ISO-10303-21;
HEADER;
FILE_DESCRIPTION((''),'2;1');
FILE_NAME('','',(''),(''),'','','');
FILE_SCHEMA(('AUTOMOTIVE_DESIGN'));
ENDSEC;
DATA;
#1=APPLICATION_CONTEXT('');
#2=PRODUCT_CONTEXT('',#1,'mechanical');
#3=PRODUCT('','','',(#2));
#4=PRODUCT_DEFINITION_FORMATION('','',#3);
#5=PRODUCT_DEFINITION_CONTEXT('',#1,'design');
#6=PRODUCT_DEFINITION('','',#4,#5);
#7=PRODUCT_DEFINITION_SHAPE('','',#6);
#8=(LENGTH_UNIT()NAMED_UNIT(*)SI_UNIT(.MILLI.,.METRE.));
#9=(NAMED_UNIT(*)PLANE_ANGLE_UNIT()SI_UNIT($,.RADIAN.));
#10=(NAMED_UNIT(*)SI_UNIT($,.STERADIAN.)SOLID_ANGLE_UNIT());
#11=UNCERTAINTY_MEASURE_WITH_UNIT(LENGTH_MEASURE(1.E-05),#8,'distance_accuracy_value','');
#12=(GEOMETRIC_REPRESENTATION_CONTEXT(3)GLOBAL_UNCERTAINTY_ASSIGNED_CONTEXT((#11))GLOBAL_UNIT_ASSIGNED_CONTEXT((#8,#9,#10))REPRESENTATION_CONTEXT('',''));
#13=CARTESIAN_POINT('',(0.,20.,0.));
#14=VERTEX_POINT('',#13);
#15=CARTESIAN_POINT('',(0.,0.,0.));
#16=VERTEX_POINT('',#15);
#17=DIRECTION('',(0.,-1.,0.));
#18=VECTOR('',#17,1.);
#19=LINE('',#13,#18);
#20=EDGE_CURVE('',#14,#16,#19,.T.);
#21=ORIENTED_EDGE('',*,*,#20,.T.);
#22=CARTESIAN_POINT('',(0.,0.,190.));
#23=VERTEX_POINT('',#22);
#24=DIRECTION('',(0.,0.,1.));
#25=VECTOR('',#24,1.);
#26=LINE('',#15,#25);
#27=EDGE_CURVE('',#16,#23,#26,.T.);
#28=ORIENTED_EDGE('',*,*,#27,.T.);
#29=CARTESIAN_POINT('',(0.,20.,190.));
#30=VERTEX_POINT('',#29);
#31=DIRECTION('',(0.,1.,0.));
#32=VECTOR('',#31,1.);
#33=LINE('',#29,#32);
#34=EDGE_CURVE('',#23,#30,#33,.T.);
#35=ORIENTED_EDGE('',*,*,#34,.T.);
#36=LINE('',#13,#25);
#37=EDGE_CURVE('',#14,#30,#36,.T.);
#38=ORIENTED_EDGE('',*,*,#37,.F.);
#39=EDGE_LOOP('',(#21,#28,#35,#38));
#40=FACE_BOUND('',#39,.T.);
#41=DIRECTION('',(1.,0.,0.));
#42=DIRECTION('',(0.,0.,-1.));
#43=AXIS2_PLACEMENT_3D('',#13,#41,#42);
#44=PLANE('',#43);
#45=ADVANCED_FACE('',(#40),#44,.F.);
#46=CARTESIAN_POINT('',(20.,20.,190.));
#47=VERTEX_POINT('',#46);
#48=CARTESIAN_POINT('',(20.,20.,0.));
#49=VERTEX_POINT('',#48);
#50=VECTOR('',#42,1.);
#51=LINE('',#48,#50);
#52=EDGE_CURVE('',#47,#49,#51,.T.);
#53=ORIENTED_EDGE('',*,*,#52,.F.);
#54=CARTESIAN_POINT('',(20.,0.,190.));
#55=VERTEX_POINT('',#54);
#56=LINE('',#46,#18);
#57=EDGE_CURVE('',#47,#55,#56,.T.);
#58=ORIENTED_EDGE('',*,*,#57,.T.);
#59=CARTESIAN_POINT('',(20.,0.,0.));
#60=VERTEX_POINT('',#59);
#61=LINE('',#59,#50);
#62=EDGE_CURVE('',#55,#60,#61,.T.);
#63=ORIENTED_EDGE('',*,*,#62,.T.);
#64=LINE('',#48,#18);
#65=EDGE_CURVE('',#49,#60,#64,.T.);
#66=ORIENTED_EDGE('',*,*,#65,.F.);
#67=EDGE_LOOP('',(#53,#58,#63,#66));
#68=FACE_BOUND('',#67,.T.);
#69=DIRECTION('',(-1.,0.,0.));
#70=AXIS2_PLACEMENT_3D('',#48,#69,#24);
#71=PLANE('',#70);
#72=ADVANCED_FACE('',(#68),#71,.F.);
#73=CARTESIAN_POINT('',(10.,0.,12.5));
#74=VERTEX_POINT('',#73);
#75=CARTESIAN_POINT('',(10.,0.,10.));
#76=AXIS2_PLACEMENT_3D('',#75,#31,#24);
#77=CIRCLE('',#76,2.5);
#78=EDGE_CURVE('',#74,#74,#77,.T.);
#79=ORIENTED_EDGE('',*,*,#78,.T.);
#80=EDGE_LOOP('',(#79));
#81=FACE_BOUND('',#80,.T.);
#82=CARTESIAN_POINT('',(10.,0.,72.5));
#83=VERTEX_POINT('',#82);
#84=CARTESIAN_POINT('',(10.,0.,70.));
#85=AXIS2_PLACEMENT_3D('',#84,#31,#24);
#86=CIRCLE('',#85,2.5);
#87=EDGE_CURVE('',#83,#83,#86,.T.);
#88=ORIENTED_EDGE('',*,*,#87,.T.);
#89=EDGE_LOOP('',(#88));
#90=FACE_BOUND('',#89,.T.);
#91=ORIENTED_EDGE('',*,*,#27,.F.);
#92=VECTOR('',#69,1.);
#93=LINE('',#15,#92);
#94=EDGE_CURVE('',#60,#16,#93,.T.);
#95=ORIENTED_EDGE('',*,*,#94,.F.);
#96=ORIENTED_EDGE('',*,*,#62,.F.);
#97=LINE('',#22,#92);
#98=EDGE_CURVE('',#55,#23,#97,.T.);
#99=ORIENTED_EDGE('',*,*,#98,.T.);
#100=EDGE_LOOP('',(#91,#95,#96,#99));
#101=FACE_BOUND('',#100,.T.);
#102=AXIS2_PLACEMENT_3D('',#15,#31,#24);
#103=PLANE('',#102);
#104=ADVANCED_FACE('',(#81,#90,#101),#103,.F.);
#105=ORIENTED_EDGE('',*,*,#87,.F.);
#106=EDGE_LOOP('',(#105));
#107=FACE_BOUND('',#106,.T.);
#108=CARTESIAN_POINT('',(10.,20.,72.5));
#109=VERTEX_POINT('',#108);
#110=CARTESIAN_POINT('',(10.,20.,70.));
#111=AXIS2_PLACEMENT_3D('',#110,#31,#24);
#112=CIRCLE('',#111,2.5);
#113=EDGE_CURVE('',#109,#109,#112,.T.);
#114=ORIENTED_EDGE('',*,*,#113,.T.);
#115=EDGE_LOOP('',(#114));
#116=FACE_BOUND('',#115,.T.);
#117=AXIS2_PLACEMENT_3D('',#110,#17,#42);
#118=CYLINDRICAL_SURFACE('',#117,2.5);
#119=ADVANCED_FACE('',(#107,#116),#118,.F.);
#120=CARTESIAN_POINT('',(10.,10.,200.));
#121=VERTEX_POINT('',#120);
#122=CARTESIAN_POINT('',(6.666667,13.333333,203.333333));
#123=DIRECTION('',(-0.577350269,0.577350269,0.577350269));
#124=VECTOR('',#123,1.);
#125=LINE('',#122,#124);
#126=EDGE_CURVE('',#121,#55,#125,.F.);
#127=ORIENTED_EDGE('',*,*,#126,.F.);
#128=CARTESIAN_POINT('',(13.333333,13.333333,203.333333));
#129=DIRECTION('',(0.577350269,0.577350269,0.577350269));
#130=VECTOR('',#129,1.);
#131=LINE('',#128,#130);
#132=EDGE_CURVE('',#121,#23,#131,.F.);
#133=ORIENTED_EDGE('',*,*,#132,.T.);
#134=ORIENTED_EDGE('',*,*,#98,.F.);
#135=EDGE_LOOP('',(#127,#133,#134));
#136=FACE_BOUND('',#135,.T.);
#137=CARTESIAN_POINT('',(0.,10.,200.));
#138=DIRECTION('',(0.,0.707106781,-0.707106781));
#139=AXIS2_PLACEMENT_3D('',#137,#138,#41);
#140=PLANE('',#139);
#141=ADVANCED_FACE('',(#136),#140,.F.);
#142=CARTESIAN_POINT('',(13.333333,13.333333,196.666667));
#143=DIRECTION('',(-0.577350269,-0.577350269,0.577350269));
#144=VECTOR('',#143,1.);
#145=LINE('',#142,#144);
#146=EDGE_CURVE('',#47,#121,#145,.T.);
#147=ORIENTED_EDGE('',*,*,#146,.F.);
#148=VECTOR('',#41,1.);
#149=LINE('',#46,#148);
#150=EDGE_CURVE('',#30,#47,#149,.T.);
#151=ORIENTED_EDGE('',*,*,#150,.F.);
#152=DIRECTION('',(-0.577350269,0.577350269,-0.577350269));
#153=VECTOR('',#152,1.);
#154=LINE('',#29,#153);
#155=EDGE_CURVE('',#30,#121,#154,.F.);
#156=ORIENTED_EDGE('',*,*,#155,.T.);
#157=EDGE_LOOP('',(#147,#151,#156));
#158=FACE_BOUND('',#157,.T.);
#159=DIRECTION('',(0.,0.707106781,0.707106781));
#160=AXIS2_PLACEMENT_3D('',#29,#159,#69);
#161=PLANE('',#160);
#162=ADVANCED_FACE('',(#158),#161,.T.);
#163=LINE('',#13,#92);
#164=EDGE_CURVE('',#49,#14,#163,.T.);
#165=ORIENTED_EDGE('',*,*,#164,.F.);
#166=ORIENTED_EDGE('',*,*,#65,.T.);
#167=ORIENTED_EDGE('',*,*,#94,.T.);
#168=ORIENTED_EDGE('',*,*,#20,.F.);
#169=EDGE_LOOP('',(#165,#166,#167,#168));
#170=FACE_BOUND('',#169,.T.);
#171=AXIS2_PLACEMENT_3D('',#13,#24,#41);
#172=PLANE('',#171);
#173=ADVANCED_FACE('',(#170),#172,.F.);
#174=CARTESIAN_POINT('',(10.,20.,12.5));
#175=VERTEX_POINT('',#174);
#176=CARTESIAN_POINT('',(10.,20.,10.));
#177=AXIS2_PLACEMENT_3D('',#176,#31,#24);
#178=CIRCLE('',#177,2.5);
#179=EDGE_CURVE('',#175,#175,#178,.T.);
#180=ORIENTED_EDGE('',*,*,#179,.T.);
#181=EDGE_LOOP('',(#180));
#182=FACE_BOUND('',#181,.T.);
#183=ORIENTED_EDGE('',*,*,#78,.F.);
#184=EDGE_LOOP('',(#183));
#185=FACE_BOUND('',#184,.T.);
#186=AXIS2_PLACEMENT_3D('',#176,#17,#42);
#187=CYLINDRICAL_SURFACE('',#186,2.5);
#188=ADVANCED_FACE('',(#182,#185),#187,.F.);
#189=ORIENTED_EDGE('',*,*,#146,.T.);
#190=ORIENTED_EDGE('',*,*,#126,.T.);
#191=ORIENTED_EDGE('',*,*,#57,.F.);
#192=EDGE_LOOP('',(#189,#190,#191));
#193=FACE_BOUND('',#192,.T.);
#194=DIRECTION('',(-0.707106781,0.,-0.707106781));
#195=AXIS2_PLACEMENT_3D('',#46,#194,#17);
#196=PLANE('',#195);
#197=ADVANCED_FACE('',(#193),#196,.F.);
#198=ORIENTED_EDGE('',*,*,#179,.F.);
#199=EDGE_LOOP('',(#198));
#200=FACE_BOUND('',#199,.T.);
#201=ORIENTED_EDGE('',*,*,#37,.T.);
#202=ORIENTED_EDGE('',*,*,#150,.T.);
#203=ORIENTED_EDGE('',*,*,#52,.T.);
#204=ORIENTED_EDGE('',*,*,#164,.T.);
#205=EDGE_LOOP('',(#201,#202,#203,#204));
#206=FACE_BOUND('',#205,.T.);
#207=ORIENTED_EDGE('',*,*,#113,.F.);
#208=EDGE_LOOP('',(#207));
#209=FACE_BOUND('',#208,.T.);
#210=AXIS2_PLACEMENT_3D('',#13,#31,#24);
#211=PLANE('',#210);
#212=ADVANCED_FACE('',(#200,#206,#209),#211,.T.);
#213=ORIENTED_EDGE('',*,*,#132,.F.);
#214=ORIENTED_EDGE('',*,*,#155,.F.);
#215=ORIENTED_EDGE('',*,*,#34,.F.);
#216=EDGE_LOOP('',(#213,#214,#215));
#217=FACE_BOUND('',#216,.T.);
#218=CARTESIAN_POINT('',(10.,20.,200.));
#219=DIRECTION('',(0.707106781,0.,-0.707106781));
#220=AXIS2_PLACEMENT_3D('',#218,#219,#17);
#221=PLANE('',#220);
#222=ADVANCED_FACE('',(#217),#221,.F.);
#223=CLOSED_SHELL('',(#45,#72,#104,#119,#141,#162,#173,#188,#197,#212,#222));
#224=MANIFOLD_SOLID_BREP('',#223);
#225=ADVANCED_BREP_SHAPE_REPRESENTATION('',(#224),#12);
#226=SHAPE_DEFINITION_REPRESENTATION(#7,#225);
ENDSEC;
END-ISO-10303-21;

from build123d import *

# Parameters (mm, degrees)
SKETCH1_W           = 20
SKETCH1_H           = 200
SKETCH1_R           = 2.5
BOSS_EXTRUDE1_DEPTH = 20
CHAMFER1_SIZE       = 10


with BuildPart() as part:
    # Sketch1 → Boss-Extrude1 (new body)
    with BuildSketch(Plane(origin=(0, 0, 0), x_dir=(1, 0, 0), z_dir=(0, 1, 0))):
        with Locations((10, -100)):
            Rectangle(SKETCH1_W, SKETCH1_H)
        with Locations(Location((10, -10, 0), (0, 0, 270))):
            Circle(SKETCH1_R, mode=Mode.SUBTRACT)
        with Locations(Location((10, -70, 0), (0, 0, 270))):
            Circle(SKETCH1_R, mode=Mode.SUBTRACT)
    extrude(amount=BOSS_EXTRUDE1_DEPTH)

    # Chamfer1
    chamfer1_edges = [part.edges().sort_by_distance(p)[0] for p in [
        (10, 0, 200),
        (10, 20, 200),
        (20, 10, 200),
        (0, 10, 200),
    ]]
    chamfer(chamfer1_edges, length=CHAMFER1_SIZE - 0.0001)  # a hair under: the kernel refuses the full size


solid = part.part
